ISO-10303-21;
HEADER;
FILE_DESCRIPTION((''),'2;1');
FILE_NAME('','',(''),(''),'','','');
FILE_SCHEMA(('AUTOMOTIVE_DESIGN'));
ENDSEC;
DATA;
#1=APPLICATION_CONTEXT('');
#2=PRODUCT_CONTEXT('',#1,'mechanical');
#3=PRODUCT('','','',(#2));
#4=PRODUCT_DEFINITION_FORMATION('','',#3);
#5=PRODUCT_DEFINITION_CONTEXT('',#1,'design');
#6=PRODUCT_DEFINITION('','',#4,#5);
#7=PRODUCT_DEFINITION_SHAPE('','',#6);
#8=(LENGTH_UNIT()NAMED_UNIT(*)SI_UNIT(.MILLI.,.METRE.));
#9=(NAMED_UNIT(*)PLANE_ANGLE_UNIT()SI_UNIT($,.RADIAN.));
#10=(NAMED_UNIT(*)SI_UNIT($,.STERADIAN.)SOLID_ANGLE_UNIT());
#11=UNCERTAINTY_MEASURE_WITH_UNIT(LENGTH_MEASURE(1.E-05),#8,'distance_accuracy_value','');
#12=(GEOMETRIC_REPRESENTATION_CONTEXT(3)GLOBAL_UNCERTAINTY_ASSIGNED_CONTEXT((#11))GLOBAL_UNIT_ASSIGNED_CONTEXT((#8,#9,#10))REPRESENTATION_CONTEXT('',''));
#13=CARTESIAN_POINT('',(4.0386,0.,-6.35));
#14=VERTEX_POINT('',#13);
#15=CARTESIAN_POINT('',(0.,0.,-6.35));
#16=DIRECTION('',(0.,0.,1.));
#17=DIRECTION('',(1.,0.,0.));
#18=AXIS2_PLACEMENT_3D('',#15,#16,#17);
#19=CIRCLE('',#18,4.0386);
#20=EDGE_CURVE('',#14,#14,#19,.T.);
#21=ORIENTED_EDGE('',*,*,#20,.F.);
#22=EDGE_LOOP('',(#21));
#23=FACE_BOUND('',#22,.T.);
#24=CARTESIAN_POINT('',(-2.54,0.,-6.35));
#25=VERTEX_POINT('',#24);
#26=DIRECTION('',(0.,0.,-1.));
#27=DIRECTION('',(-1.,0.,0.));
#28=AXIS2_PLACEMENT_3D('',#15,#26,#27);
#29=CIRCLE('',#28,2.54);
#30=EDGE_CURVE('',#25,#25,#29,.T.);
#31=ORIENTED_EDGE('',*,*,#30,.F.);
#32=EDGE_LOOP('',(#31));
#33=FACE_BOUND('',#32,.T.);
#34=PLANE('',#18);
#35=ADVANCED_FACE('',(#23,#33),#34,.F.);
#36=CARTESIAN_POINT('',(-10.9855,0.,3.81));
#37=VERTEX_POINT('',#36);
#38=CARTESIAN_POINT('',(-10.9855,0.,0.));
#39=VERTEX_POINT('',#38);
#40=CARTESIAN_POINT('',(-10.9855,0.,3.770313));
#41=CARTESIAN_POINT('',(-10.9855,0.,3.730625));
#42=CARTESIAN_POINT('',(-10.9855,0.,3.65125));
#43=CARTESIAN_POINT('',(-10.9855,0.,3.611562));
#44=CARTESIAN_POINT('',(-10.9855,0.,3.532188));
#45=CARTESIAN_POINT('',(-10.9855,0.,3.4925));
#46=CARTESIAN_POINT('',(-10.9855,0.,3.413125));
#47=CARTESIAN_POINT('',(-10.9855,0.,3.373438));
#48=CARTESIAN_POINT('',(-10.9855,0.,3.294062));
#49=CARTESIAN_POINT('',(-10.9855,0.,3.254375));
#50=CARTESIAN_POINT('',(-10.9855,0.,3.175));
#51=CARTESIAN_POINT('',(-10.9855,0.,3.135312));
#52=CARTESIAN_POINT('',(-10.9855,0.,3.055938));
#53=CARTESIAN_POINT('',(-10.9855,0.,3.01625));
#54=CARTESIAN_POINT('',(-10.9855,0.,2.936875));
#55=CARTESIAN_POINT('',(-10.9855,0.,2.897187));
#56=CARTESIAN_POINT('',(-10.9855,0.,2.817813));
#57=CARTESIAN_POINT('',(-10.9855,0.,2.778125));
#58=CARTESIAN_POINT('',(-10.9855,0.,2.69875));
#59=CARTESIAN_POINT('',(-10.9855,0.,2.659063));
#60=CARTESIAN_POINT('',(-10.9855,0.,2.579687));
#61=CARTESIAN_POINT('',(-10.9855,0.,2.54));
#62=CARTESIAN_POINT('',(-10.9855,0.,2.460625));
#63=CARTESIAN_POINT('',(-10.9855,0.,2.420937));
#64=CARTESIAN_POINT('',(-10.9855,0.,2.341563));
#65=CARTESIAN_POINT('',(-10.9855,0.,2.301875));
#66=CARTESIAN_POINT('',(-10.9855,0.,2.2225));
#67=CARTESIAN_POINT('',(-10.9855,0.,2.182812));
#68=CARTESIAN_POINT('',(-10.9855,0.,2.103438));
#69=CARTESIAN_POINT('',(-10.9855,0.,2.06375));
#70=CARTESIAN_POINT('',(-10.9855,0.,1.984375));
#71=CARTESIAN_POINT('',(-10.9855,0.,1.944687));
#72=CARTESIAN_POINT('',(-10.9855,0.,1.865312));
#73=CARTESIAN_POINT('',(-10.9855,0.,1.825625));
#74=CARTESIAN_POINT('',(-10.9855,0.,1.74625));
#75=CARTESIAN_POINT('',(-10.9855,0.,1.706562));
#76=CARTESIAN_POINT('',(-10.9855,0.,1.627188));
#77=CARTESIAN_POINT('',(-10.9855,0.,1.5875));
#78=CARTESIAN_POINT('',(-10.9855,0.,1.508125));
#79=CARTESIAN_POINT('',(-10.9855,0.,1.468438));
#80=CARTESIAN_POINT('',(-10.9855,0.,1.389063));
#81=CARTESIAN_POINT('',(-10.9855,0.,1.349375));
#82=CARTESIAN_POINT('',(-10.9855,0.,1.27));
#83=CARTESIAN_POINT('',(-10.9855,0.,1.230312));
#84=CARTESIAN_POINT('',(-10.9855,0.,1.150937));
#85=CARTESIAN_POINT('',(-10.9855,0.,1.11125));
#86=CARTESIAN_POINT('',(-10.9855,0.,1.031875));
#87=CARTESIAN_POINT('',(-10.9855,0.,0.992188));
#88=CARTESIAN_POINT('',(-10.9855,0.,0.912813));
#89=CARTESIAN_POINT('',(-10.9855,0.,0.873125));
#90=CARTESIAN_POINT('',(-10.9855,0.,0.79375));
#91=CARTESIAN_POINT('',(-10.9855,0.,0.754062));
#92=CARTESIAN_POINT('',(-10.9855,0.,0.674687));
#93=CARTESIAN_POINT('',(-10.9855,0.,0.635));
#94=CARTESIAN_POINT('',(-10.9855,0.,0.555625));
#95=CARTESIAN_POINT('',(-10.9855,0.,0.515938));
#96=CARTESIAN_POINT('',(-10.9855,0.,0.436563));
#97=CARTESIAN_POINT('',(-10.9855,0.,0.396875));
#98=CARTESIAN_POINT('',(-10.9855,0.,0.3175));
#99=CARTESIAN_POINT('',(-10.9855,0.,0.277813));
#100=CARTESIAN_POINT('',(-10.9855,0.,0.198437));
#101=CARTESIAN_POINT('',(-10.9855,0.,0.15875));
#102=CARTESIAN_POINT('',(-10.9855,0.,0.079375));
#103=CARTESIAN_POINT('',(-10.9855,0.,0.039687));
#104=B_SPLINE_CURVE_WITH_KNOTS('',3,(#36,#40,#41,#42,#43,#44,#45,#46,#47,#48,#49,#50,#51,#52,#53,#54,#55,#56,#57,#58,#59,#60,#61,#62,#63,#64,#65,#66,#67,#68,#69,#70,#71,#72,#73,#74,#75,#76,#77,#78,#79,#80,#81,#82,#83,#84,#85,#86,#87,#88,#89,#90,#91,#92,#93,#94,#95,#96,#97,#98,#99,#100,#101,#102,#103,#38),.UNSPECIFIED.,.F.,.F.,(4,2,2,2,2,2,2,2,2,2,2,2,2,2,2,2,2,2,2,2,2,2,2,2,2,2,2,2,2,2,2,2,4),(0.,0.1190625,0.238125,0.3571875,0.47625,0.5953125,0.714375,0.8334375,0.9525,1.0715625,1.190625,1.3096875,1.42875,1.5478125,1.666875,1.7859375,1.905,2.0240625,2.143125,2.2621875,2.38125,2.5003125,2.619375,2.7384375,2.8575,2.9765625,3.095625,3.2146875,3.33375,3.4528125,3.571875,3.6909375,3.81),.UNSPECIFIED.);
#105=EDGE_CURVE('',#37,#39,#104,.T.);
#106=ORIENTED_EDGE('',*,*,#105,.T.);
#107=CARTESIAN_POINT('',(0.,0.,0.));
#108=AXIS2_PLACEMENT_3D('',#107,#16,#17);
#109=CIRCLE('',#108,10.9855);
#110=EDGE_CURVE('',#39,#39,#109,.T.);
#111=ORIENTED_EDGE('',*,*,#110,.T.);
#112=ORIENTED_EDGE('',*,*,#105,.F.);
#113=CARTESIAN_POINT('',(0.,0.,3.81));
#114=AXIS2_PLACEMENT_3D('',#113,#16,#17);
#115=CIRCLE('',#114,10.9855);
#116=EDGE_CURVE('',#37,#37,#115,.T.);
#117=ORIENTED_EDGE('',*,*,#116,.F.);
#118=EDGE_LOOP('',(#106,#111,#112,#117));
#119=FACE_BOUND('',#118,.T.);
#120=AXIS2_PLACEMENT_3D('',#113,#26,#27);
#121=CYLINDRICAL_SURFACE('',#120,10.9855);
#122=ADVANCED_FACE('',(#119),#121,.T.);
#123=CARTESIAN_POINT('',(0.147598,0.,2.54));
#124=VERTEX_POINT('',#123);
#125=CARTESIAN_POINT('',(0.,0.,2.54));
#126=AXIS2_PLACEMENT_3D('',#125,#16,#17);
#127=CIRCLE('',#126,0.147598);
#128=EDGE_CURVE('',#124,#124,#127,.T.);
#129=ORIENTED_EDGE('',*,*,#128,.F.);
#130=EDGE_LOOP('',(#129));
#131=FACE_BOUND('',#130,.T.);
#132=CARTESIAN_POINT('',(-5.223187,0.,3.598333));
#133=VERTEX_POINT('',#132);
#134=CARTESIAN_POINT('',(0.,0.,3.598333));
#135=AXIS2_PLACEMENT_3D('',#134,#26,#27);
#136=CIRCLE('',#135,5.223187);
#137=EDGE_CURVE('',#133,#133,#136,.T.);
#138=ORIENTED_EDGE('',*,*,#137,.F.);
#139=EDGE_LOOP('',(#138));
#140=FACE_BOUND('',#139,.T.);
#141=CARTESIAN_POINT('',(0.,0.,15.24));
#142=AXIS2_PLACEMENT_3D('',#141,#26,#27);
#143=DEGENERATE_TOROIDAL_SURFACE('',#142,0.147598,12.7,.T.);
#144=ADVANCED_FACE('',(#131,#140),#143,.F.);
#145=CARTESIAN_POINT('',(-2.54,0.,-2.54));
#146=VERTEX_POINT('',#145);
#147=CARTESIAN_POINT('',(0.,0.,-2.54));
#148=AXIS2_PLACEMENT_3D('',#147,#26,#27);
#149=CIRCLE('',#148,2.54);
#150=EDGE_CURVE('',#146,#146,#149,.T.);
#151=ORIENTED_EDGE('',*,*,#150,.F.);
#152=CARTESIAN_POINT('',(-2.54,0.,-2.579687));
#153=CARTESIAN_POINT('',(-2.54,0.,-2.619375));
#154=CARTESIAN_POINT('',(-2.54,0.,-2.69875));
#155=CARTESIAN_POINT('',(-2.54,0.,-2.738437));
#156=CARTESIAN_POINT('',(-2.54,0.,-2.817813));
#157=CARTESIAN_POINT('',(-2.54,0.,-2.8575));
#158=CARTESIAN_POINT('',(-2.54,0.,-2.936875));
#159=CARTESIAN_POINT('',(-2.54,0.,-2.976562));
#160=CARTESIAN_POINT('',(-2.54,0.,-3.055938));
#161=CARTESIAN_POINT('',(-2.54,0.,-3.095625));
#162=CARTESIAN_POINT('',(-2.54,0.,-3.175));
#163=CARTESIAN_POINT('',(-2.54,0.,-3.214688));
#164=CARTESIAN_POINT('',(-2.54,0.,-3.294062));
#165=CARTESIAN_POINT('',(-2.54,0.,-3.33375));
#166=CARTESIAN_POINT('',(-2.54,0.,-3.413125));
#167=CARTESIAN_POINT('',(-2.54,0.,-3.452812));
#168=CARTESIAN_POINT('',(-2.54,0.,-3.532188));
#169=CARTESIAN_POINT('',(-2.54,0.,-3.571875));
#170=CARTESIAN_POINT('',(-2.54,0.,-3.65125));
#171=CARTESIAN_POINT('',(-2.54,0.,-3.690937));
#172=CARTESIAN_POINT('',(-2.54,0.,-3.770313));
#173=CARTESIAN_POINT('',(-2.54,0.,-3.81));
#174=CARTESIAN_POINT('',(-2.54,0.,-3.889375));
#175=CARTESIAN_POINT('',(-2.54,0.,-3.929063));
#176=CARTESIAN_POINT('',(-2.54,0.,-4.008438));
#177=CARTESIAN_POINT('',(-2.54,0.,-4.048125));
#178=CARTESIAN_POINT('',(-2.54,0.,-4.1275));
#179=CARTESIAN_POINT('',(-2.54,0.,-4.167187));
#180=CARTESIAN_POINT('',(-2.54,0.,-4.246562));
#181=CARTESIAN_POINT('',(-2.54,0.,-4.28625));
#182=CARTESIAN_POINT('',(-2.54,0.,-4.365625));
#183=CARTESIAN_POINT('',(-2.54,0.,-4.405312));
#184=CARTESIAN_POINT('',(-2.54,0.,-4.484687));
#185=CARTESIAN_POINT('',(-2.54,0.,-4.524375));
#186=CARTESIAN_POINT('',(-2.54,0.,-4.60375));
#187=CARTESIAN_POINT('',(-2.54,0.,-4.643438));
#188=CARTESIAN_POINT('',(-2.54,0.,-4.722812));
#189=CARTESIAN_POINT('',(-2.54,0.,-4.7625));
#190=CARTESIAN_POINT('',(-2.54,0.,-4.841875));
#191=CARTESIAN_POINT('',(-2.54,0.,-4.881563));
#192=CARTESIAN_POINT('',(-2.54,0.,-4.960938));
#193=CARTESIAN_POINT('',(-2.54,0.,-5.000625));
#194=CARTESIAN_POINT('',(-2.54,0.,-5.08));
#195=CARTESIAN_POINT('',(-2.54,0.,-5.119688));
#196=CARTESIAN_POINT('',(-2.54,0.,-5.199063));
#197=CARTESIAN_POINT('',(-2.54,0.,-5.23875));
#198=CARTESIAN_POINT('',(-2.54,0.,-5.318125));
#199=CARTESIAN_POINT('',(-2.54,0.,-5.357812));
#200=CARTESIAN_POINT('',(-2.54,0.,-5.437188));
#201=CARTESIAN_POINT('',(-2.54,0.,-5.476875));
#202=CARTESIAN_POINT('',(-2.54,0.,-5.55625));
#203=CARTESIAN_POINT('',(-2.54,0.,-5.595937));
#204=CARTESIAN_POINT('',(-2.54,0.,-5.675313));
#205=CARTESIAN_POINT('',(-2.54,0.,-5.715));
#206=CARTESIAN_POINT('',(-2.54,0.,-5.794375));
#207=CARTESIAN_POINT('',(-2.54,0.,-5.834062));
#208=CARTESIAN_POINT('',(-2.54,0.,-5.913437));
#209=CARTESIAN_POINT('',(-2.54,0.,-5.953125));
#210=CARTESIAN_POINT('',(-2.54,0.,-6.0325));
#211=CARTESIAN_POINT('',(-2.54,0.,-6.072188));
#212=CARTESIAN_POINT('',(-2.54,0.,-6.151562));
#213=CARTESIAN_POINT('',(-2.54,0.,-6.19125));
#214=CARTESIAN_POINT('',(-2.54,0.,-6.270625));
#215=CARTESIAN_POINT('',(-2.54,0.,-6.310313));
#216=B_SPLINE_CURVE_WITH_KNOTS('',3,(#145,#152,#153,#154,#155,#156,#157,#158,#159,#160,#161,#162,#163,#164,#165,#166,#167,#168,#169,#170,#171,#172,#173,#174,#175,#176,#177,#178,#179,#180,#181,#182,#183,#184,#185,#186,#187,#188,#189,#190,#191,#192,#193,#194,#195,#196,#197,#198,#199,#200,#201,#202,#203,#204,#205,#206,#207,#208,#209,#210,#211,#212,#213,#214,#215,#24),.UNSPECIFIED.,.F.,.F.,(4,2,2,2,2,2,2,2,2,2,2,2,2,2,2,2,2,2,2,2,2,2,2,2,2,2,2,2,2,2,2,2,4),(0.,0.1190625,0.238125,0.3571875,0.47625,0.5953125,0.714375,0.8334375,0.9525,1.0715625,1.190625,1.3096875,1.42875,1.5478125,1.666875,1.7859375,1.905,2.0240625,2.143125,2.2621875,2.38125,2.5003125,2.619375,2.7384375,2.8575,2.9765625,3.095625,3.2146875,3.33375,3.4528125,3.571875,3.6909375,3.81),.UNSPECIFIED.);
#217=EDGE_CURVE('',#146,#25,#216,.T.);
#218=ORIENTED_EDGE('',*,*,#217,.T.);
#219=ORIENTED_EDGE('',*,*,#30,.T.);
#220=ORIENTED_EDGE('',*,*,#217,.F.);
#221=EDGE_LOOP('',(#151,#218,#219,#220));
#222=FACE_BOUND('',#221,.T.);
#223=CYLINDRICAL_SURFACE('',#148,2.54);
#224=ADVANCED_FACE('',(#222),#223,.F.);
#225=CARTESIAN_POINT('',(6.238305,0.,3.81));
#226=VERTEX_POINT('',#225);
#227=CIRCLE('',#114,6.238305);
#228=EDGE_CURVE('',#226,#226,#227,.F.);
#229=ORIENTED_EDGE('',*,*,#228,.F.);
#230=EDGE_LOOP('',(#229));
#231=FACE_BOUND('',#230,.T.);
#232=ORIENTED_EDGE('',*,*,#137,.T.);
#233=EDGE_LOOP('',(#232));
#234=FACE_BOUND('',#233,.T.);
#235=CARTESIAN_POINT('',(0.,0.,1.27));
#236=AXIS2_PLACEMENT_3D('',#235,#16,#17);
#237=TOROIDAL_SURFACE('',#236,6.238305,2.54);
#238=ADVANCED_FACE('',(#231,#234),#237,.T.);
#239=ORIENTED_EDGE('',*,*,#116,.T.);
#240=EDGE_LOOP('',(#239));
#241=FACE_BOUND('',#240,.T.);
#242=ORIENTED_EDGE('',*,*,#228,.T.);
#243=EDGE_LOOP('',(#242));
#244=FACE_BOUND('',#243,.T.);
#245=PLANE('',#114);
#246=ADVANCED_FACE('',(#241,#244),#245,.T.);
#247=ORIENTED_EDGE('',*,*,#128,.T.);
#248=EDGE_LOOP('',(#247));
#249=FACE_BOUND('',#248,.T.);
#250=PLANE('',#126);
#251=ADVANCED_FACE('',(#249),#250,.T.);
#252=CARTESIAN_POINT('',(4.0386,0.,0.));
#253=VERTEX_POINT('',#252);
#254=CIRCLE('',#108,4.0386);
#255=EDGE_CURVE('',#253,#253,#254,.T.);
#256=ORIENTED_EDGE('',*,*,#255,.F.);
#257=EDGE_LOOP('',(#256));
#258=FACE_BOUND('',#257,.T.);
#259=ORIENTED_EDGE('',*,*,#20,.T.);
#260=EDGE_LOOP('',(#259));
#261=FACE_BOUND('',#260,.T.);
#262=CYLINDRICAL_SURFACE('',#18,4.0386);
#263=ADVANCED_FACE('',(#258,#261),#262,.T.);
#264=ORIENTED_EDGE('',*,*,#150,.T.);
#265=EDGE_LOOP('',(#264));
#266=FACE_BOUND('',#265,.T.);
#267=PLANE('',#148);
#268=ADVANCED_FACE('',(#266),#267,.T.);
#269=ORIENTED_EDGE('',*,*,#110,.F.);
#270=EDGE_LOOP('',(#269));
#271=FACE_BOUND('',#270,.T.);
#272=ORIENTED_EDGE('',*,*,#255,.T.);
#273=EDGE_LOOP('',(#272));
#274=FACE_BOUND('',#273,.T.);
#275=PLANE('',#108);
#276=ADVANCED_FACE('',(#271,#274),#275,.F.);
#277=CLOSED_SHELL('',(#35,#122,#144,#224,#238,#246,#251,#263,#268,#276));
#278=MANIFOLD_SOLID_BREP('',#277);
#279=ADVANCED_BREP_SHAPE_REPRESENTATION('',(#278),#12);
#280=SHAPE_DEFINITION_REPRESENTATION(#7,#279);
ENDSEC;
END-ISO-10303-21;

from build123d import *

# Parameters (mm, degrees)
SKETCH1_R           = 4.0386
BOSS_EXTRUDE1_DEPTH = 2.54
SKETCH1_4_R         = 10.9855
SKETCH1_4_R_2       = 4.0386
BOSS_EXTRUDE2_DEPTH = 3.81
FILLET1_R           = 2.54
FILLET2_R           = 12.7
SKETCH1_6_R         = 4.0386
BOSS_EXTRUDE3_DEPTH = 6.35
SKETCH3_R           = 2.54
CUT_EXTRUDE1_DEPTH  = 3.81


with BuildPart() as part:
    # Sketch1 → Boss-Extrude1 (new body)
    with BuildSketch(Plane.XY):
        Circle(SKETCH1_R)
    extrude(amount=BOSS_EXTRUDE1_DEPTH)

    # Sketch1<4> → Boss-Extrude2 (add)
    with BuildSketch(Plane.XY):
        with Locations(Location((0, 0, 0), (0, 0, 180))):
            Circle(SKETCH1_4_R)
        with Locations(Location((0, 0, 0), (0, 0, 180))):
            Circle(SKETCH1_4_R_2, mode=Mode.SUBTRACT)
    extrude(amount=BOSS_EXTRUDE2_DEPTH)

    # Fillet1
    # the kernel refuses this fillet: 2.54 mm, written as the material it takes off along each edge
    with BuildSketch(Plane(origin=(0, 0, 3.81), x_dir=(-1, 0, 0), z_dir=(0, 1, 0))) as fillet1_piece_1:
        with BuildLine():
            CenterArc((6.238304526, -2.54), FILLET1_R, 90, 60)
            Line((4.0386, -1.27), (3.994605909, -1.2446))
            ThreePointArc((3.994605909, -1.2446), (3.9878, -0.635), (3.9878, 0))
            Line((3.9878, 0), (4.0386, 0.0508))
            Line((4.0386, 0.0508), (6.238304526, 0.0508))
            Line((6.238304526, 0.0508), (6.238304526, 0))
        make_face()
    revolve(axis=Axis((0, 0, 3.81), (0, 0, 1)), mode=Mode.SUBTRACT)

    # Fillet2
    fillet2_edges = [part.edges().sort_by_distance(p)[0] for p in [
        (4.0386, 0, 2.54),
    ]]
    fillet(fillet2_edges, radius=FILLET2_R)

    # Sketch1<6> → Boss-Extrude3 (add)
    with BuildSketch(Plane.XY):
        Circle(SKETCH1_6_R)
    extrude(amount=-BOSS_EXTRUDE3_DEPTH)

    # Sketch3 → Cut-Extrude1 (cut)
    with BuildSketch(Plane(origin=(0, 0, -6.35), x_dir=(-1, 0, 0), z_dir=(0, 0, -1))):
        Circle(SKETCH3_R)
    extrude(amount=-CUT_EXTRUDE1_DEPTH, mode=Mode.SUBTRACT)


solid = part.part
